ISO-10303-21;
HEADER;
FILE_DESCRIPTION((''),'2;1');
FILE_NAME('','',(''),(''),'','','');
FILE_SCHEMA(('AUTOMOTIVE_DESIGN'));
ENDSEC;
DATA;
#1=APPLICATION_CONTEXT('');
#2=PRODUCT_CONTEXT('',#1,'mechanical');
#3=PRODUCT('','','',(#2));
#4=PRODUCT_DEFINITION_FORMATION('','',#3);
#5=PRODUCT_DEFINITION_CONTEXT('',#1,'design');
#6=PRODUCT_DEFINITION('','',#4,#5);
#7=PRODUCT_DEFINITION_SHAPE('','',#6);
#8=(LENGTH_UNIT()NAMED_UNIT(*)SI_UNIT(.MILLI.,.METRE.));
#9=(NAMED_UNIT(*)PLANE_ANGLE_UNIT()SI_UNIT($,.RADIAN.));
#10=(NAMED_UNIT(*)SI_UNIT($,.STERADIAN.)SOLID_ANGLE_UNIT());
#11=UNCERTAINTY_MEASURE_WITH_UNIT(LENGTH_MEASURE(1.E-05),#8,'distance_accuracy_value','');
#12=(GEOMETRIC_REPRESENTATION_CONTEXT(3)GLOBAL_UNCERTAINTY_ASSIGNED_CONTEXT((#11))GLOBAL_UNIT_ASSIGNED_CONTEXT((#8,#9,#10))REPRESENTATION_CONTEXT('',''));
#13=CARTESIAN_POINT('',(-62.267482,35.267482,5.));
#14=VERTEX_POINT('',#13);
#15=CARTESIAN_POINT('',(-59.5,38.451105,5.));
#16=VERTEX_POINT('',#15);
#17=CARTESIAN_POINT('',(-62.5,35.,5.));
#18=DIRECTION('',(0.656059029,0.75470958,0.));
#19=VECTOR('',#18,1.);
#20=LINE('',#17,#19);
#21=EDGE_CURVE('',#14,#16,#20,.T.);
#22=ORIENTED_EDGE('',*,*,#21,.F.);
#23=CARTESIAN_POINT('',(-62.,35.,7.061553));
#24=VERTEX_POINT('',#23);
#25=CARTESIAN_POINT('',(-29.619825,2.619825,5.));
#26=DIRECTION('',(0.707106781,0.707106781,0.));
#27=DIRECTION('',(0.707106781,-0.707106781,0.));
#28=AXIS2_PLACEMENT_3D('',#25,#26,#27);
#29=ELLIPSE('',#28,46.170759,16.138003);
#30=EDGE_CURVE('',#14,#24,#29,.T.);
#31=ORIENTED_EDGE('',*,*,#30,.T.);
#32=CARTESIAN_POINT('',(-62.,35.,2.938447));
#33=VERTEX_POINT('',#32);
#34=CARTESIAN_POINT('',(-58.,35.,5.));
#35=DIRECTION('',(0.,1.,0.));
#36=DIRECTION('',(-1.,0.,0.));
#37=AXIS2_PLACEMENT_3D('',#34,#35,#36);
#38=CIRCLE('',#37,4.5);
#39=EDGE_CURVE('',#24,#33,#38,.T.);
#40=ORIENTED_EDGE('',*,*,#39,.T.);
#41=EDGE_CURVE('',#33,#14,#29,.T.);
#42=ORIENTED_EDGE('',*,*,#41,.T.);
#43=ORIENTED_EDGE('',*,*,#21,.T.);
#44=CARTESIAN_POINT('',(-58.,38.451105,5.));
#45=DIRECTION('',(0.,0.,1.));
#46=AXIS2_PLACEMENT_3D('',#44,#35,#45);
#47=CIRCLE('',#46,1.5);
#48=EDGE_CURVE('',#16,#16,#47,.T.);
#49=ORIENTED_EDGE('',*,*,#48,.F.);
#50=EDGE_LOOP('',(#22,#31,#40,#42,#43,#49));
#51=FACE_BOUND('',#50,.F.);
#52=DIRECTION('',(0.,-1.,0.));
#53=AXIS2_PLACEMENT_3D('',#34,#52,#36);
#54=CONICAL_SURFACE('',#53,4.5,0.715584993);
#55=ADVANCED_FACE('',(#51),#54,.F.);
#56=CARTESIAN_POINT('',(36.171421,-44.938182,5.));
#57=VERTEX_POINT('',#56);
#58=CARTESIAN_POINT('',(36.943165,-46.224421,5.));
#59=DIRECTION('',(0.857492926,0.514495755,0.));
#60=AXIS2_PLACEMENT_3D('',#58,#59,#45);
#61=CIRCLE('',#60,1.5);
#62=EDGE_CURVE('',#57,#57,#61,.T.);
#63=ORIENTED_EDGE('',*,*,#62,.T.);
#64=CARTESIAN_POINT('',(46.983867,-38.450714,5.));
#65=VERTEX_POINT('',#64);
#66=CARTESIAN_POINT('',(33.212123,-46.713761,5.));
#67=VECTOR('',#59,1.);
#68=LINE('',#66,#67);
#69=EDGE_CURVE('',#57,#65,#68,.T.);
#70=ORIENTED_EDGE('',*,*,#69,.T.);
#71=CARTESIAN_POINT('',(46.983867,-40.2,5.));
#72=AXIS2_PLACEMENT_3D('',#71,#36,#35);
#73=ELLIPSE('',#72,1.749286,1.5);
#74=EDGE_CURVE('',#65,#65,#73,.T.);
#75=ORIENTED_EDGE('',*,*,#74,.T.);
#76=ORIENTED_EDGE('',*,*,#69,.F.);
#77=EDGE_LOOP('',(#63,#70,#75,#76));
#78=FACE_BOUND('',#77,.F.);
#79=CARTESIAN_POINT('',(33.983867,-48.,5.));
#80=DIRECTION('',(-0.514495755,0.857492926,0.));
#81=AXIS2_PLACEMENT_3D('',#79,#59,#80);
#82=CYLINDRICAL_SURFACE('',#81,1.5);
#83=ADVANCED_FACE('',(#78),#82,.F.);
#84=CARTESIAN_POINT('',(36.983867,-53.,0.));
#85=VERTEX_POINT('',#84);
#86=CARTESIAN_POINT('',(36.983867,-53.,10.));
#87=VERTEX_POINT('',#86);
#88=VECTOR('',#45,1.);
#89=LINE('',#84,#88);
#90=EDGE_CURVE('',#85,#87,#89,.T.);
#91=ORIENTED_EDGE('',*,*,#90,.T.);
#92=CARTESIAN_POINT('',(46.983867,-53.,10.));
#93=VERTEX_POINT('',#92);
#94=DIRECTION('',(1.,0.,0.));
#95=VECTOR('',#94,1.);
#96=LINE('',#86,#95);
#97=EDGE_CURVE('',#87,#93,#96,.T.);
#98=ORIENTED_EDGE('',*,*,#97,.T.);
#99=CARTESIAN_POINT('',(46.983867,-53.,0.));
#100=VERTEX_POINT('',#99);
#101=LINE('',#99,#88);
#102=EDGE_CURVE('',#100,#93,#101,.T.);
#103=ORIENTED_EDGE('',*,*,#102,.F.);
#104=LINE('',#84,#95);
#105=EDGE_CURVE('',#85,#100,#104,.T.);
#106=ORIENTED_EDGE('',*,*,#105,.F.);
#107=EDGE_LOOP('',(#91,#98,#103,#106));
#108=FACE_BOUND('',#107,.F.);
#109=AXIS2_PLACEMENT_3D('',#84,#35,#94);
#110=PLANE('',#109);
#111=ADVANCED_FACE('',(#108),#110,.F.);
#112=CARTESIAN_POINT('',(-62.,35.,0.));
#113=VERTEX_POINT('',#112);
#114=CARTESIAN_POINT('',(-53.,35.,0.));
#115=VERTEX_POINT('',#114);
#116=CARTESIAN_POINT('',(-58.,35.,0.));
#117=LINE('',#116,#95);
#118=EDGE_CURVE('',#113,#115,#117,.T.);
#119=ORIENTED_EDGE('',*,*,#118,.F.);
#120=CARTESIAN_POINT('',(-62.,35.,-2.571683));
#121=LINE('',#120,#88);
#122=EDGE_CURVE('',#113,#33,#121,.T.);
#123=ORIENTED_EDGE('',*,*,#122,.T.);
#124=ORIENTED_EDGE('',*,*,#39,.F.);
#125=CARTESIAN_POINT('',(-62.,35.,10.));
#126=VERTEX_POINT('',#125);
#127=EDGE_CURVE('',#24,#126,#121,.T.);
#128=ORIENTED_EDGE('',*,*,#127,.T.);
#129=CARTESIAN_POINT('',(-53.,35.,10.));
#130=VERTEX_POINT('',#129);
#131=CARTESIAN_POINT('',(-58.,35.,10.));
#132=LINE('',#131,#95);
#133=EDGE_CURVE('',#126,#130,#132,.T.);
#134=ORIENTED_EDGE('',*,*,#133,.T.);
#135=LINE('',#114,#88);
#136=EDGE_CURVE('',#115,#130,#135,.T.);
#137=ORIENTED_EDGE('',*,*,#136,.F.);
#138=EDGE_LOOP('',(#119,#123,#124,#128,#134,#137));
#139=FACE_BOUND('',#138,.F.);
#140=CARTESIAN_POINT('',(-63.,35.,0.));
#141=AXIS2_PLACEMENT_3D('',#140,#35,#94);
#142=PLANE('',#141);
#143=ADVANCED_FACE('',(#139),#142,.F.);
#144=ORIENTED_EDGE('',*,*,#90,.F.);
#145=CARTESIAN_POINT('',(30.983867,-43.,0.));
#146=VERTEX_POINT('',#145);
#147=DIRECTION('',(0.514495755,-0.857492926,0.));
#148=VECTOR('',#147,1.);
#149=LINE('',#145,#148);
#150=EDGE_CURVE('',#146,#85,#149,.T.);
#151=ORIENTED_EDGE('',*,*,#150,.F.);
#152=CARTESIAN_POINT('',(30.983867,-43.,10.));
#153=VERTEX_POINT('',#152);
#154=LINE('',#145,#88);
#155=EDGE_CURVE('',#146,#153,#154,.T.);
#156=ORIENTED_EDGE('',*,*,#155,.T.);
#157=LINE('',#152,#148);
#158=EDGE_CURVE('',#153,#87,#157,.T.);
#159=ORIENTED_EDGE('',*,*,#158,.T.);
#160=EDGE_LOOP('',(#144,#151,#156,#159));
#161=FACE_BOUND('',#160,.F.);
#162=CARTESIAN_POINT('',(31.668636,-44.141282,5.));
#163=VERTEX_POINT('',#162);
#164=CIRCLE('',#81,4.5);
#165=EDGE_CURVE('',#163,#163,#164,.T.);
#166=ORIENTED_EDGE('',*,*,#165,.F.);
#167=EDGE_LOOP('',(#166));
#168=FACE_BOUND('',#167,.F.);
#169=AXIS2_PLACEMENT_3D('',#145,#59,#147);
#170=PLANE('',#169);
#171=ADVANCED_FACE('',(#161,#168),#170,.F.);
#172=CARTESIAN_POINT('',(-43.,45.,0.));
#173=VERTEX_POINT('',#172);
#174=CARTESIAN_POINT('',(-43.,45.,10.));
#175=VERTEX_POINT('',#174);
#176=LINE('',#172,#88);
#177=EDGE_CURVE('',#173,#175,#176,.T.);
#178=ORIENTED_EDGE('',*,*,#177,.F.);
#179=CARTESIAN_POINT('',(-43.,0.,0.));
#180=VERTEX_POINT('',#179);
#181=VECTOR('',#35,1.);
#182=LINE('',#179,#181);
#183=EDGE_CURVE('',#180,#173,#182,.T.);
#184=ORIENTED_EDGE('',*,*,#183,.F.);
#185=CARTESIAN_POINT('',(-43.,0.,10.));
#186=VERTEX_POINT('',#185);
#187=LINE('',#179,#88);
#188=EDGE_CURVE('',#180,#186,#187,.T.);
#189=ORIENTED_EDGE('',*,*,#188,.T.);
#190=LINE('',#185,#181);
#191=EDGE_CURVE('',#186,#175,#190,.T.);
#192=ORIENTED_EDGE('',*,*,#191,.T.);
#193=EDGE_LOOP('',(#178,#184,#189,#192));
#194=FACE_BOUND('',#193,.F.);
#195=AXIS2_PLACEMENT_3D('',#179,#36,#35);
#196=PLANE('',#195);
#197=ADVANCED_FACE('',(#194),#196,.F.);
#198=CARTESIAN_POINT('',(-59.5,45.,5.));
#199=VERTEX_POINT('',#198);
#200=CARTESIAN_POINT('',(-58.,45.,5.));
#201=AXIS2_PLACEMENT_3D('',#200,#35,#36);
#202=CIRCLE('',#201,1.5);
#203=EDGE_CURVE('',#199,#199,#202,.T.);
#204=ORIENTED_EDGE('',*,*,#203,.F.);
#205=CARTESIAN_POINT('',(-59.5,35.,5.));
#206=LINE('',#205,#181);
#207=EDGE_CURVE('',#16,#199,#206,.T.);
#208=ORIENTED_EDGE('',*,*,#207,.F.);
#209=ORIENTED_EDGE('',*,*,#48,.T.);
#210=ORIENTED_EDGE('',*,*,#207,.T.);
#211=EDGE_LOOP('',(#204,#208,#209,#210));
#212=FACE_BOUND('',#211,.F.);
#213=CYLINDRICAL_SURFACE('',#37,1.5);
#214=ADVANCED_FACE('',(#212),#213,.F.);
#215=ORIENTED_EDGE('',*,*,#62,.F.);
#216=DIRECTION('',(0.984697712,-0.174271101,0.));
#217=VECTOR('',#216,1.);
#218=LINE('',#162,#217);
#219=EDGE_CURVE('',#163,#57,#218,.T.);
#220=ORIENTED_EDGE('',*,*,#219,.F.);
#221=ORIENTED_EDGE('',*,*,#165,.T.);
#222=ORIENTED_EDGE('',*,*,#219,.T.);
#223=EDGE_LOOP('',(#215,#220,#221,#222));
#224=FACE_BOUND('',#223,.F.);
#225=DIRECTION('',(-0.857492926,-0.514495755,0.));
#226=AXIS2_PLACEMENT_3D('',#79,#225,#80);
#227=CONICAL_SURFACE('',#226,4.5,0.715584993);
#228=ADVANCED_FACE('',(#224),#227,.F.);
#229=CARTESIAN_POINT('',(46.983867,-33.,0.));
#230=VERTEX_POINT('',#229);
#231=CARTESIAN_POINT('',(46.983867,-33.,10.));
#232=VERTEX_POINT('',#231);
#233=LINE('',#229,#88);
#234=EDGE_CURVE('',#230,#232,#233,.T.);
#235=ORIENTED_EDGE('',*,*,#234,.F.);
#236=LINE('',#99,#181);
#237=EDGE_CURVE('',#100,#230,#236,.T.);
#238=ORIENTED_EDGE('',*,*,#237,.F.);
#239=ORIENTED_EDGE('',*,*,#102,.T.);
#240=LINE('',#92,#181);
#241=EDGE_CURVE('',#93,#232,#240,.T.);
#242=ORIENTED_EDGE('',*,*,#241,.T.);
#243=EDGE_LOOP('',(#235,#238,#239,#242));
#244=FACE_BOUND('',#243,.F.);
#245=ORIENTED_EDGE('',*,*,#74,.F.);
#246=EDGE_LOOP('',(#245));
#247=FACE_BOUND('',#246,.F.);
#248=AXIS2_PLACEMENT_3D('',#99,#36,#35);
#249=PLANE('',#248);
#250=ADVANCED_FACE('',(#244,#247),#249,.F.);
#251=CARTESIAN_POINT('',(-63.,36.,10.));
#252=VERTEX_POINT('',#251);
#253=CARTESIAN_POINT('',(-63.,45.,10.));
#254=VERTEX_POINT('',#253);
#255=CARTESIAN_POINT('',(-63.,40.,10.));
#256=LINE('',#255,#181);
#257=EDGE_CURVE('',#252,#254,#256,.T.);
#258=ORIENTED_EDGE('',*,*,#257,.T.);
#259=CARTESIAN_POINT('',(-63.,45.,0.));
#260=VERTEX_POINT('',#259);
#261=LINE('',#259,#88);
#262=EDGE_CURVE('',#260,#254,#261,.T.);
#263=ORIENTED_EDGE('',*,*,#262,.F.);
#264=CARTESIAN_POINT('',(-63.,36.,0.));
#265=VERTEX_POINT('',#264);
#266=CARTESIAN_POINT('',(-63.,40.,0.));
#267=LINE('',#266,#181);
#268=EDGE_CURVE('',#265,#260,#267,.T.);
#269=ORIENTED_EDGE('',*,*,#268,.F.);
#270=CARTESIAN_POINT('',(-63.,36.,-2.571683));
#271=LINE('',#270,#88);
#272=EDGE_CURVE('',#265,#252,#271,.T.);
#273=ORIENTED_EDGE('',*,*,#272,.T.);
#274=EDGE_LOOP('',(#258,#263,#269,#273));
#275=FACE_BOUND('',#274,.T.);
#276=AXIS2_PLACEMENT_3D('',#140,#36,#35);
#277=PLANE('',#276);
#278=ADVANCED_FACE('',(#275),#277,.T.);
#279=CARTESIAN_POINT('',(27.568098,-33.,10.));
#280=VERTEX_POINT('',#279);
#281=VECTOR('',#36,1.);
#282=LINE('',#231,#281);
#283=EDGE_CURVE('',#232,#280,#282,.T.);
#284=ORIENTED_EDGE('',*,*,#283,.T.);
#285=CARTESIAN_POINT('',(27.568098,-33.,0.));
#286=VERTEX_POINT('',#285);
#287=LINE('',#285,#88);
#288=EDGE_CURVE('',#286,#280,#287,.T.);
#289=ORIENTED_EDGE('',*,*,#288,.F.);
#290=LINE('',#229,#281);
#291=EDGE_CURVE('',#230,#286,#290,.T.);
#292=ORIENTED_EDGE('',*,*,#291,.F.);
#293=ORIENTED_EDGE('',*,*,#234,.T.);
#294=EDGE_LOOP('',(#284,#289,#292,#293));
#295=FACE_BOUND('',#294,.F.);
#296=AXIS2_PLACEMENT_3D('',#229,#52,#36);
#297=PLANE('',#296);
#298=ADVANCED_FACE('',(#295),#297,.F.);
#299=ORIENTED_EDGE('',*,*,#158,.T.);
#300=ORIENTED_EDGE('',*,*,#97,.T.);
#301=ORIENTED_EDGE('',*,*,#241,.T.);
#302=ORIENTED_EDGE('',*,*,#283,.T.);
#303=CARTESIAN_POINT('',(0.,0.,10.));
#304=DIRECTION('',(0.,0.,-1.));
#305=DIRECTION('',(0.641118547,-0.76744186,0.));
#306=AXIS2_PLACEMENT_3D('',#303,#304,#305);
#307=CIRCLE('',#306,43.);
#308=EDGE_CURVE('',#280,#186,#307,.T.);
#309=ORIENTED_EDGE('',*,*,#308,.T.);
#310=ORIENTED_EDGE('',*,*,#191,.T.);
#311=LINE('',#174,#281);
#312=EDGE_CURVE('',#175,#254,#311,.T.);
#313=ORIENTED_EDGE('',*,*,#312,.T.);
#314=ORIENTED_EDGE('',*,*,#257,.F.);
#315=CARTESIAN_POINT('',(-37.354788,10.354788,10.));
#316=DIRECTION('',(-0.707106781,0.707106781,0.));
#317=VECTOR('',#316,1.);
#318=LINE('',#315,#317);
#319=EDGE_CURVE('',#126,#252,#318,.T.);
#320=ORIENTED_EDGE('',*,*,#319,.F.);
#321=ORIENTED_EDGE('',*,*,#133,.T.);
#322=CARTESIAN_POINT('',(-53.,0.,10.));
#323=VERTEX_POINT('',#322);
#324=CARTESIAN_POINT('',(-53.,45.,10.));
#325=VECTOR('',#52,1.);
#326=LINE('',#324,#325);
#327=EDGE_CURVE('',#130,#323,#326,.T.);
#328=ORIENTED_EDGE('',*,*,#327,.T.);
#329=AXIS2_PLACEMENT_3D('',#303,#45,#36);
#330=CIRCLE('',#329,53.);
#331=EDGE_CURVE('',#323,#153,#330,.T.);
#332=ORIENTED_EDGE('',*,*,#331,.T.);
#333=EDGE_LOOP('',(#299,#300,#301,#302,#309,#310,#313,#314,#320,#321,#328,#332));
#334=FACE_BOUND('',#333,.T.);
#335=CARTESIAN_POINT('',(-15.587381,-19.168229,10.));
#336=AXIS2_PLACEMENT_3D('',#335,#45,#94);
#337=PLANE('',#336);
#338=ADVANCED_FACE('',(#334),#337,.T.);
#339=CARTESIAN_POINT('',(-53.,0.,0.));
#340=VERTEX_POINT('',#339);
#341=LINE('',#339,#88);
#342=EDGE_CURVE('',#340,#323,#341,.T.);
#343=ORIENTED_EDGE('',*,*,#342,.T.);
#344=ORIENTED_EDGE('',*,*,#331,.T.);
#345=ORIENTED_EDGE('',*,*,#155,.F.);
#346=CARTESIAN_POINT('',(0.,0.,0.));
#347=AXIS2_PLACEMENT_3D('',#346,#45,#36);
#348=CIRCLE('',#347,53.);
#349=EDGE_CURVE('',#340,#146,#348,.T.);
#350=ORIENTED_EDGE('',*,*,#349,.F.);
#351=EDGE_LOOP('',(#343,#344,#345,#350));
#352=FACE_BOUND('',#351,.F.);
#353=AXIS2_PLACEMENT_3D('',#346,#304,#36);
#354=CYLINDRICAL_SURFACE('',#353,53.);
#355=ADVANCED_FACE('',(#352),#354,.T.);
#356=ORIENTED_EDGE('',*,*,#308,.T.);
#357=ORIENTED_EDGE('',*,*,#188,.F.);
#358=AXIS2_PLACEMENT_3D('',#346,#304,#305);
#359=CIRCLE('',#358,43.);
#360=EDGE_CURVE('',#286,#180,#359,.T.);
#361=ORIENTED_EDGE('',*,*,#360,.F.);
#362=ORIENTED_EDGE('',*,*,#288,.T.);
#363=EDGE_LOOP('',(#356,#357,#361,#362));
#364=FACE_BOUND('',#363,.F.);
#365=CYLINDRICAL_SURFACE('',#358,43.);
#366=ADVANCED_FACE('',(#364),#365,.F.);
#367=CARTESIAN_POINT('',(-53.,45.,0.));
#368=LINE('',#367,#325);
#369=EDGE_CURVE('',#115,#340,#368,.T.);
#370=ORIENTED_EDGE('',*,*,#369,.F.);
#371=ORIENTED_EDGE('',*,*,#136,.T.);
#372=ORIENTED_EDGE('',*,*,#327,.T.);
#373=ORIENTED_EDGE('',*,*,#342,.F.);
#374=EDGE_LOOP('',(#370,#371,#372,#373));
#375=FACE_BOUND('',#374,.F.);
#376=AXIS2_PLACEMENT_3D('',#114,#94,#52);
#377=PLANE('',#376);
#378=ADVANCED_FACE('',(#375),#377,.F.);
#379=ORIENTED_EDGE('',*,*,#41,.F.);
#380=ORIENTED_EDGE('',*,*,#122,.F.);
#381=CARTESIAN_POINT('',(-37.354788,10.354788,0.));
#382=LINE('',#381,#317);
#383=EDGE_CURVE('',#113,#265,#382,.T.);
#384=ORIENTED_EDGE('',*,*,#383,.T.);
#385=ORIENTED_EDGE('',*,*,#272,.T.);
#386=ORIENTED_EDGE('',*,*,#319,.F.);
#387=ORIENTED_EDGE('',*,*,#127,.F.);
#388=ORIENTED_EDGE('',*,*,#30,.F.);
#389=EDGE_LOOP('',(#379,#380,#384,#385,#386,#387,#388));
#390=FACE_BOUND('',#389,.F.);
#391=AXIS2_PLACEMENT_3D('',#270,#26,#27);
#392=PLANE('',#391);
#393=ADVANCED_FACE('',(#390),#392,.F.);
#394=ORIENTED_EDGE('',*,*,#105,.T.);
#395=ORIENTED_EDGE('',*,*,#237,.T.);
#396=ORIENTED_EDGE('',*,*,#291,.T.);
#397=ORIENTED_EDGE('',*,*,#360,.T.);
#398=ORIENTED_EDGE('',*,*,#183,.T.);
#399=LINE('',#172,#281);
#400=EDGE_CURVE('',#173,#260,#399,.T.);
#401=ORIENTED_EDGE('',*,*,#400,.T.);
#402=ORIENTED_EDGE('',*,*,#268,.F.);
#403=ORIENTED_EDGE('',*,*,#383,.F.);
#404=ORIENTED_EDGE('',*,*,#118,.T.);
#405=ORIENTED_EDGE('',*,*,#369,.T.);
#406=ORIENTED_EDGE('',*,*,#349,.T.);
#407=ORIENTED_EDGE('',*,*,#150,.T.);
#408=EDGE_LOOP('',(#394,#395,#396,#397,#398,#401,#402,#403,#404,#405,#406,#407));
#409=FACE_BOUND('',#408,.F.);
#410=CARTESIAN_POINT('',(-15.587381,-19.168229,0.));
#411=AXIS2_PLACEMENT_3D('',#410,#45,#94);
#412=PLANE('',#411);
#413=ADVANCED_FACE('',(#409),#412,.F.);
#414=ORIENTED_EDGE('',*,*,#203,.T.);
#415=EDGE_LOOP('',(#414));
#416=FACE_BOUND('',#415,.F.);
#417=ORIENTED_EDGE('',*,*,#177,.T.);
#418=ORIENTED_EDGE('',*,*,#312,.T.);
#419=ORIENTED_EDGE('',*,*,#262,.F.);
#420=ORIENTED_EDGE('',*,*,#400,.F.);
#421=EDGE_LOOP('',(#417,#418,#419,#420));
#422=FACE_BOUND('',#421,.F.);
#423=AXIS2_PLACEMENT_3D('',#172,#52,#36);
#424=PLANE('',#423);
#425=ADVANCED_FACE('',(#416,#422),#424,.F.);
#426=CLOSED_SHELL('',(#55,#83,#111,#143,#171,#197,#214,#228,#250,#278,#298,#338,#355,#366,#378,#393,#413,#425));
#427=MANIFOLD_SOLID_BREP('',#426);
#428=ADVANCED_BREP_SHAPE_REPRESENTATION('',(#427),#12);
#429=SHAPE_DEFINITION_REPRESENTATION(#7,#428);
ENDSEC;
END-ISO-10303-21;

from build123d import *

# Parameters (mm, degrees)
F0_W                 = 10
F0_H                 = 10
F1_DEPTH             = 10
F4_D                 = 3
F4_CSINK_D           = 9
F4_CSINK_ANGLE       = 82
F4_ON_F2_D           = 3
F4_ON_F2_CSINK_D     = 9
F4_ON_F2_CSINK_ANGLE = 82
F5_T1_DEPTH          = 15.1433659759


# Not quite as in the source:
# - a fillet or chamfer that OpenCascade refuses, or shapes differently, is made with other operations: its cross-section is extruded or revolved along the edge and cut away or added


with BuildPart() as f1:
    # F0 (on Top) → F1 (new body)
    with BuildSketch(Plane.XY):
        with BuildLine():
            ThreePointArc((27.5680975042, -33), (-18.2149911792, -38.9514325326), (-43, 0))
            Line((-43, 0), (-43, 45))
            Line((-43, 45), (-53, 45))
            Line((-53, 45), (-53, 35))
            Line((-53, 35), (-53, 0))
            ThreePointArc((-53, 0), (-24.154244567, -47.1759734335), (30.9838667697, -43))
            Line((30.9838667697, -43), (36.9838667697, -53))
            Line((36.9838667697, -53), (46.9838667697, -53))
            Line((46.9838667697, -53), (46.9838667697, -43))
            Line((46.9838667697, -43), (46.9838667697, -33))
            Line((46.9838667697, -33), (27.5680975042, -33))
        make_face()
        with Locations((-58, 40)):
            Rectangle(F0_W, F0_H)
    extrude(amount=F1_DEPTH)

    # F4 (through all)
    with Locations(Plane(origin=(3.8116667424, 2.2870000454, 0), x_dir=(0.5144957554, -0.8574929257, 0), z_dir=(-0.8574929257, -0.5144957554, 0))):
        with Locations((58.6442156402, 5)):
            CounterSinkHole(F4_D / 2, F4_CSINK_D / 2, counter_sink_angle=F4_CSINK_ANGLE)

    # F4 on F2 (through all)
    with Locations(Plane.XZ.offset(-35)):
        with Locations((-58, 5)):
            CounterSinkHole(F4_ON_F2_D / 2, F4_ON_F2_CSINK_D / 2, counter_sink_angle=F4_ON_F2_CSINK_ANGLE)

    # F5: chamfer of 1 on 1 edges, made by hand

    # F5_s2 → F5_t1 (cut)
    with BuildSketch(Plane.XY.offset(-2.571682988)):
        Polygon((-63, 36), (-62, 35), (-63, 35), align=None)
    extrude(amount=F5_T1_DEPTH, mode=Mode.SUBTRACT)


solid = f1.part
